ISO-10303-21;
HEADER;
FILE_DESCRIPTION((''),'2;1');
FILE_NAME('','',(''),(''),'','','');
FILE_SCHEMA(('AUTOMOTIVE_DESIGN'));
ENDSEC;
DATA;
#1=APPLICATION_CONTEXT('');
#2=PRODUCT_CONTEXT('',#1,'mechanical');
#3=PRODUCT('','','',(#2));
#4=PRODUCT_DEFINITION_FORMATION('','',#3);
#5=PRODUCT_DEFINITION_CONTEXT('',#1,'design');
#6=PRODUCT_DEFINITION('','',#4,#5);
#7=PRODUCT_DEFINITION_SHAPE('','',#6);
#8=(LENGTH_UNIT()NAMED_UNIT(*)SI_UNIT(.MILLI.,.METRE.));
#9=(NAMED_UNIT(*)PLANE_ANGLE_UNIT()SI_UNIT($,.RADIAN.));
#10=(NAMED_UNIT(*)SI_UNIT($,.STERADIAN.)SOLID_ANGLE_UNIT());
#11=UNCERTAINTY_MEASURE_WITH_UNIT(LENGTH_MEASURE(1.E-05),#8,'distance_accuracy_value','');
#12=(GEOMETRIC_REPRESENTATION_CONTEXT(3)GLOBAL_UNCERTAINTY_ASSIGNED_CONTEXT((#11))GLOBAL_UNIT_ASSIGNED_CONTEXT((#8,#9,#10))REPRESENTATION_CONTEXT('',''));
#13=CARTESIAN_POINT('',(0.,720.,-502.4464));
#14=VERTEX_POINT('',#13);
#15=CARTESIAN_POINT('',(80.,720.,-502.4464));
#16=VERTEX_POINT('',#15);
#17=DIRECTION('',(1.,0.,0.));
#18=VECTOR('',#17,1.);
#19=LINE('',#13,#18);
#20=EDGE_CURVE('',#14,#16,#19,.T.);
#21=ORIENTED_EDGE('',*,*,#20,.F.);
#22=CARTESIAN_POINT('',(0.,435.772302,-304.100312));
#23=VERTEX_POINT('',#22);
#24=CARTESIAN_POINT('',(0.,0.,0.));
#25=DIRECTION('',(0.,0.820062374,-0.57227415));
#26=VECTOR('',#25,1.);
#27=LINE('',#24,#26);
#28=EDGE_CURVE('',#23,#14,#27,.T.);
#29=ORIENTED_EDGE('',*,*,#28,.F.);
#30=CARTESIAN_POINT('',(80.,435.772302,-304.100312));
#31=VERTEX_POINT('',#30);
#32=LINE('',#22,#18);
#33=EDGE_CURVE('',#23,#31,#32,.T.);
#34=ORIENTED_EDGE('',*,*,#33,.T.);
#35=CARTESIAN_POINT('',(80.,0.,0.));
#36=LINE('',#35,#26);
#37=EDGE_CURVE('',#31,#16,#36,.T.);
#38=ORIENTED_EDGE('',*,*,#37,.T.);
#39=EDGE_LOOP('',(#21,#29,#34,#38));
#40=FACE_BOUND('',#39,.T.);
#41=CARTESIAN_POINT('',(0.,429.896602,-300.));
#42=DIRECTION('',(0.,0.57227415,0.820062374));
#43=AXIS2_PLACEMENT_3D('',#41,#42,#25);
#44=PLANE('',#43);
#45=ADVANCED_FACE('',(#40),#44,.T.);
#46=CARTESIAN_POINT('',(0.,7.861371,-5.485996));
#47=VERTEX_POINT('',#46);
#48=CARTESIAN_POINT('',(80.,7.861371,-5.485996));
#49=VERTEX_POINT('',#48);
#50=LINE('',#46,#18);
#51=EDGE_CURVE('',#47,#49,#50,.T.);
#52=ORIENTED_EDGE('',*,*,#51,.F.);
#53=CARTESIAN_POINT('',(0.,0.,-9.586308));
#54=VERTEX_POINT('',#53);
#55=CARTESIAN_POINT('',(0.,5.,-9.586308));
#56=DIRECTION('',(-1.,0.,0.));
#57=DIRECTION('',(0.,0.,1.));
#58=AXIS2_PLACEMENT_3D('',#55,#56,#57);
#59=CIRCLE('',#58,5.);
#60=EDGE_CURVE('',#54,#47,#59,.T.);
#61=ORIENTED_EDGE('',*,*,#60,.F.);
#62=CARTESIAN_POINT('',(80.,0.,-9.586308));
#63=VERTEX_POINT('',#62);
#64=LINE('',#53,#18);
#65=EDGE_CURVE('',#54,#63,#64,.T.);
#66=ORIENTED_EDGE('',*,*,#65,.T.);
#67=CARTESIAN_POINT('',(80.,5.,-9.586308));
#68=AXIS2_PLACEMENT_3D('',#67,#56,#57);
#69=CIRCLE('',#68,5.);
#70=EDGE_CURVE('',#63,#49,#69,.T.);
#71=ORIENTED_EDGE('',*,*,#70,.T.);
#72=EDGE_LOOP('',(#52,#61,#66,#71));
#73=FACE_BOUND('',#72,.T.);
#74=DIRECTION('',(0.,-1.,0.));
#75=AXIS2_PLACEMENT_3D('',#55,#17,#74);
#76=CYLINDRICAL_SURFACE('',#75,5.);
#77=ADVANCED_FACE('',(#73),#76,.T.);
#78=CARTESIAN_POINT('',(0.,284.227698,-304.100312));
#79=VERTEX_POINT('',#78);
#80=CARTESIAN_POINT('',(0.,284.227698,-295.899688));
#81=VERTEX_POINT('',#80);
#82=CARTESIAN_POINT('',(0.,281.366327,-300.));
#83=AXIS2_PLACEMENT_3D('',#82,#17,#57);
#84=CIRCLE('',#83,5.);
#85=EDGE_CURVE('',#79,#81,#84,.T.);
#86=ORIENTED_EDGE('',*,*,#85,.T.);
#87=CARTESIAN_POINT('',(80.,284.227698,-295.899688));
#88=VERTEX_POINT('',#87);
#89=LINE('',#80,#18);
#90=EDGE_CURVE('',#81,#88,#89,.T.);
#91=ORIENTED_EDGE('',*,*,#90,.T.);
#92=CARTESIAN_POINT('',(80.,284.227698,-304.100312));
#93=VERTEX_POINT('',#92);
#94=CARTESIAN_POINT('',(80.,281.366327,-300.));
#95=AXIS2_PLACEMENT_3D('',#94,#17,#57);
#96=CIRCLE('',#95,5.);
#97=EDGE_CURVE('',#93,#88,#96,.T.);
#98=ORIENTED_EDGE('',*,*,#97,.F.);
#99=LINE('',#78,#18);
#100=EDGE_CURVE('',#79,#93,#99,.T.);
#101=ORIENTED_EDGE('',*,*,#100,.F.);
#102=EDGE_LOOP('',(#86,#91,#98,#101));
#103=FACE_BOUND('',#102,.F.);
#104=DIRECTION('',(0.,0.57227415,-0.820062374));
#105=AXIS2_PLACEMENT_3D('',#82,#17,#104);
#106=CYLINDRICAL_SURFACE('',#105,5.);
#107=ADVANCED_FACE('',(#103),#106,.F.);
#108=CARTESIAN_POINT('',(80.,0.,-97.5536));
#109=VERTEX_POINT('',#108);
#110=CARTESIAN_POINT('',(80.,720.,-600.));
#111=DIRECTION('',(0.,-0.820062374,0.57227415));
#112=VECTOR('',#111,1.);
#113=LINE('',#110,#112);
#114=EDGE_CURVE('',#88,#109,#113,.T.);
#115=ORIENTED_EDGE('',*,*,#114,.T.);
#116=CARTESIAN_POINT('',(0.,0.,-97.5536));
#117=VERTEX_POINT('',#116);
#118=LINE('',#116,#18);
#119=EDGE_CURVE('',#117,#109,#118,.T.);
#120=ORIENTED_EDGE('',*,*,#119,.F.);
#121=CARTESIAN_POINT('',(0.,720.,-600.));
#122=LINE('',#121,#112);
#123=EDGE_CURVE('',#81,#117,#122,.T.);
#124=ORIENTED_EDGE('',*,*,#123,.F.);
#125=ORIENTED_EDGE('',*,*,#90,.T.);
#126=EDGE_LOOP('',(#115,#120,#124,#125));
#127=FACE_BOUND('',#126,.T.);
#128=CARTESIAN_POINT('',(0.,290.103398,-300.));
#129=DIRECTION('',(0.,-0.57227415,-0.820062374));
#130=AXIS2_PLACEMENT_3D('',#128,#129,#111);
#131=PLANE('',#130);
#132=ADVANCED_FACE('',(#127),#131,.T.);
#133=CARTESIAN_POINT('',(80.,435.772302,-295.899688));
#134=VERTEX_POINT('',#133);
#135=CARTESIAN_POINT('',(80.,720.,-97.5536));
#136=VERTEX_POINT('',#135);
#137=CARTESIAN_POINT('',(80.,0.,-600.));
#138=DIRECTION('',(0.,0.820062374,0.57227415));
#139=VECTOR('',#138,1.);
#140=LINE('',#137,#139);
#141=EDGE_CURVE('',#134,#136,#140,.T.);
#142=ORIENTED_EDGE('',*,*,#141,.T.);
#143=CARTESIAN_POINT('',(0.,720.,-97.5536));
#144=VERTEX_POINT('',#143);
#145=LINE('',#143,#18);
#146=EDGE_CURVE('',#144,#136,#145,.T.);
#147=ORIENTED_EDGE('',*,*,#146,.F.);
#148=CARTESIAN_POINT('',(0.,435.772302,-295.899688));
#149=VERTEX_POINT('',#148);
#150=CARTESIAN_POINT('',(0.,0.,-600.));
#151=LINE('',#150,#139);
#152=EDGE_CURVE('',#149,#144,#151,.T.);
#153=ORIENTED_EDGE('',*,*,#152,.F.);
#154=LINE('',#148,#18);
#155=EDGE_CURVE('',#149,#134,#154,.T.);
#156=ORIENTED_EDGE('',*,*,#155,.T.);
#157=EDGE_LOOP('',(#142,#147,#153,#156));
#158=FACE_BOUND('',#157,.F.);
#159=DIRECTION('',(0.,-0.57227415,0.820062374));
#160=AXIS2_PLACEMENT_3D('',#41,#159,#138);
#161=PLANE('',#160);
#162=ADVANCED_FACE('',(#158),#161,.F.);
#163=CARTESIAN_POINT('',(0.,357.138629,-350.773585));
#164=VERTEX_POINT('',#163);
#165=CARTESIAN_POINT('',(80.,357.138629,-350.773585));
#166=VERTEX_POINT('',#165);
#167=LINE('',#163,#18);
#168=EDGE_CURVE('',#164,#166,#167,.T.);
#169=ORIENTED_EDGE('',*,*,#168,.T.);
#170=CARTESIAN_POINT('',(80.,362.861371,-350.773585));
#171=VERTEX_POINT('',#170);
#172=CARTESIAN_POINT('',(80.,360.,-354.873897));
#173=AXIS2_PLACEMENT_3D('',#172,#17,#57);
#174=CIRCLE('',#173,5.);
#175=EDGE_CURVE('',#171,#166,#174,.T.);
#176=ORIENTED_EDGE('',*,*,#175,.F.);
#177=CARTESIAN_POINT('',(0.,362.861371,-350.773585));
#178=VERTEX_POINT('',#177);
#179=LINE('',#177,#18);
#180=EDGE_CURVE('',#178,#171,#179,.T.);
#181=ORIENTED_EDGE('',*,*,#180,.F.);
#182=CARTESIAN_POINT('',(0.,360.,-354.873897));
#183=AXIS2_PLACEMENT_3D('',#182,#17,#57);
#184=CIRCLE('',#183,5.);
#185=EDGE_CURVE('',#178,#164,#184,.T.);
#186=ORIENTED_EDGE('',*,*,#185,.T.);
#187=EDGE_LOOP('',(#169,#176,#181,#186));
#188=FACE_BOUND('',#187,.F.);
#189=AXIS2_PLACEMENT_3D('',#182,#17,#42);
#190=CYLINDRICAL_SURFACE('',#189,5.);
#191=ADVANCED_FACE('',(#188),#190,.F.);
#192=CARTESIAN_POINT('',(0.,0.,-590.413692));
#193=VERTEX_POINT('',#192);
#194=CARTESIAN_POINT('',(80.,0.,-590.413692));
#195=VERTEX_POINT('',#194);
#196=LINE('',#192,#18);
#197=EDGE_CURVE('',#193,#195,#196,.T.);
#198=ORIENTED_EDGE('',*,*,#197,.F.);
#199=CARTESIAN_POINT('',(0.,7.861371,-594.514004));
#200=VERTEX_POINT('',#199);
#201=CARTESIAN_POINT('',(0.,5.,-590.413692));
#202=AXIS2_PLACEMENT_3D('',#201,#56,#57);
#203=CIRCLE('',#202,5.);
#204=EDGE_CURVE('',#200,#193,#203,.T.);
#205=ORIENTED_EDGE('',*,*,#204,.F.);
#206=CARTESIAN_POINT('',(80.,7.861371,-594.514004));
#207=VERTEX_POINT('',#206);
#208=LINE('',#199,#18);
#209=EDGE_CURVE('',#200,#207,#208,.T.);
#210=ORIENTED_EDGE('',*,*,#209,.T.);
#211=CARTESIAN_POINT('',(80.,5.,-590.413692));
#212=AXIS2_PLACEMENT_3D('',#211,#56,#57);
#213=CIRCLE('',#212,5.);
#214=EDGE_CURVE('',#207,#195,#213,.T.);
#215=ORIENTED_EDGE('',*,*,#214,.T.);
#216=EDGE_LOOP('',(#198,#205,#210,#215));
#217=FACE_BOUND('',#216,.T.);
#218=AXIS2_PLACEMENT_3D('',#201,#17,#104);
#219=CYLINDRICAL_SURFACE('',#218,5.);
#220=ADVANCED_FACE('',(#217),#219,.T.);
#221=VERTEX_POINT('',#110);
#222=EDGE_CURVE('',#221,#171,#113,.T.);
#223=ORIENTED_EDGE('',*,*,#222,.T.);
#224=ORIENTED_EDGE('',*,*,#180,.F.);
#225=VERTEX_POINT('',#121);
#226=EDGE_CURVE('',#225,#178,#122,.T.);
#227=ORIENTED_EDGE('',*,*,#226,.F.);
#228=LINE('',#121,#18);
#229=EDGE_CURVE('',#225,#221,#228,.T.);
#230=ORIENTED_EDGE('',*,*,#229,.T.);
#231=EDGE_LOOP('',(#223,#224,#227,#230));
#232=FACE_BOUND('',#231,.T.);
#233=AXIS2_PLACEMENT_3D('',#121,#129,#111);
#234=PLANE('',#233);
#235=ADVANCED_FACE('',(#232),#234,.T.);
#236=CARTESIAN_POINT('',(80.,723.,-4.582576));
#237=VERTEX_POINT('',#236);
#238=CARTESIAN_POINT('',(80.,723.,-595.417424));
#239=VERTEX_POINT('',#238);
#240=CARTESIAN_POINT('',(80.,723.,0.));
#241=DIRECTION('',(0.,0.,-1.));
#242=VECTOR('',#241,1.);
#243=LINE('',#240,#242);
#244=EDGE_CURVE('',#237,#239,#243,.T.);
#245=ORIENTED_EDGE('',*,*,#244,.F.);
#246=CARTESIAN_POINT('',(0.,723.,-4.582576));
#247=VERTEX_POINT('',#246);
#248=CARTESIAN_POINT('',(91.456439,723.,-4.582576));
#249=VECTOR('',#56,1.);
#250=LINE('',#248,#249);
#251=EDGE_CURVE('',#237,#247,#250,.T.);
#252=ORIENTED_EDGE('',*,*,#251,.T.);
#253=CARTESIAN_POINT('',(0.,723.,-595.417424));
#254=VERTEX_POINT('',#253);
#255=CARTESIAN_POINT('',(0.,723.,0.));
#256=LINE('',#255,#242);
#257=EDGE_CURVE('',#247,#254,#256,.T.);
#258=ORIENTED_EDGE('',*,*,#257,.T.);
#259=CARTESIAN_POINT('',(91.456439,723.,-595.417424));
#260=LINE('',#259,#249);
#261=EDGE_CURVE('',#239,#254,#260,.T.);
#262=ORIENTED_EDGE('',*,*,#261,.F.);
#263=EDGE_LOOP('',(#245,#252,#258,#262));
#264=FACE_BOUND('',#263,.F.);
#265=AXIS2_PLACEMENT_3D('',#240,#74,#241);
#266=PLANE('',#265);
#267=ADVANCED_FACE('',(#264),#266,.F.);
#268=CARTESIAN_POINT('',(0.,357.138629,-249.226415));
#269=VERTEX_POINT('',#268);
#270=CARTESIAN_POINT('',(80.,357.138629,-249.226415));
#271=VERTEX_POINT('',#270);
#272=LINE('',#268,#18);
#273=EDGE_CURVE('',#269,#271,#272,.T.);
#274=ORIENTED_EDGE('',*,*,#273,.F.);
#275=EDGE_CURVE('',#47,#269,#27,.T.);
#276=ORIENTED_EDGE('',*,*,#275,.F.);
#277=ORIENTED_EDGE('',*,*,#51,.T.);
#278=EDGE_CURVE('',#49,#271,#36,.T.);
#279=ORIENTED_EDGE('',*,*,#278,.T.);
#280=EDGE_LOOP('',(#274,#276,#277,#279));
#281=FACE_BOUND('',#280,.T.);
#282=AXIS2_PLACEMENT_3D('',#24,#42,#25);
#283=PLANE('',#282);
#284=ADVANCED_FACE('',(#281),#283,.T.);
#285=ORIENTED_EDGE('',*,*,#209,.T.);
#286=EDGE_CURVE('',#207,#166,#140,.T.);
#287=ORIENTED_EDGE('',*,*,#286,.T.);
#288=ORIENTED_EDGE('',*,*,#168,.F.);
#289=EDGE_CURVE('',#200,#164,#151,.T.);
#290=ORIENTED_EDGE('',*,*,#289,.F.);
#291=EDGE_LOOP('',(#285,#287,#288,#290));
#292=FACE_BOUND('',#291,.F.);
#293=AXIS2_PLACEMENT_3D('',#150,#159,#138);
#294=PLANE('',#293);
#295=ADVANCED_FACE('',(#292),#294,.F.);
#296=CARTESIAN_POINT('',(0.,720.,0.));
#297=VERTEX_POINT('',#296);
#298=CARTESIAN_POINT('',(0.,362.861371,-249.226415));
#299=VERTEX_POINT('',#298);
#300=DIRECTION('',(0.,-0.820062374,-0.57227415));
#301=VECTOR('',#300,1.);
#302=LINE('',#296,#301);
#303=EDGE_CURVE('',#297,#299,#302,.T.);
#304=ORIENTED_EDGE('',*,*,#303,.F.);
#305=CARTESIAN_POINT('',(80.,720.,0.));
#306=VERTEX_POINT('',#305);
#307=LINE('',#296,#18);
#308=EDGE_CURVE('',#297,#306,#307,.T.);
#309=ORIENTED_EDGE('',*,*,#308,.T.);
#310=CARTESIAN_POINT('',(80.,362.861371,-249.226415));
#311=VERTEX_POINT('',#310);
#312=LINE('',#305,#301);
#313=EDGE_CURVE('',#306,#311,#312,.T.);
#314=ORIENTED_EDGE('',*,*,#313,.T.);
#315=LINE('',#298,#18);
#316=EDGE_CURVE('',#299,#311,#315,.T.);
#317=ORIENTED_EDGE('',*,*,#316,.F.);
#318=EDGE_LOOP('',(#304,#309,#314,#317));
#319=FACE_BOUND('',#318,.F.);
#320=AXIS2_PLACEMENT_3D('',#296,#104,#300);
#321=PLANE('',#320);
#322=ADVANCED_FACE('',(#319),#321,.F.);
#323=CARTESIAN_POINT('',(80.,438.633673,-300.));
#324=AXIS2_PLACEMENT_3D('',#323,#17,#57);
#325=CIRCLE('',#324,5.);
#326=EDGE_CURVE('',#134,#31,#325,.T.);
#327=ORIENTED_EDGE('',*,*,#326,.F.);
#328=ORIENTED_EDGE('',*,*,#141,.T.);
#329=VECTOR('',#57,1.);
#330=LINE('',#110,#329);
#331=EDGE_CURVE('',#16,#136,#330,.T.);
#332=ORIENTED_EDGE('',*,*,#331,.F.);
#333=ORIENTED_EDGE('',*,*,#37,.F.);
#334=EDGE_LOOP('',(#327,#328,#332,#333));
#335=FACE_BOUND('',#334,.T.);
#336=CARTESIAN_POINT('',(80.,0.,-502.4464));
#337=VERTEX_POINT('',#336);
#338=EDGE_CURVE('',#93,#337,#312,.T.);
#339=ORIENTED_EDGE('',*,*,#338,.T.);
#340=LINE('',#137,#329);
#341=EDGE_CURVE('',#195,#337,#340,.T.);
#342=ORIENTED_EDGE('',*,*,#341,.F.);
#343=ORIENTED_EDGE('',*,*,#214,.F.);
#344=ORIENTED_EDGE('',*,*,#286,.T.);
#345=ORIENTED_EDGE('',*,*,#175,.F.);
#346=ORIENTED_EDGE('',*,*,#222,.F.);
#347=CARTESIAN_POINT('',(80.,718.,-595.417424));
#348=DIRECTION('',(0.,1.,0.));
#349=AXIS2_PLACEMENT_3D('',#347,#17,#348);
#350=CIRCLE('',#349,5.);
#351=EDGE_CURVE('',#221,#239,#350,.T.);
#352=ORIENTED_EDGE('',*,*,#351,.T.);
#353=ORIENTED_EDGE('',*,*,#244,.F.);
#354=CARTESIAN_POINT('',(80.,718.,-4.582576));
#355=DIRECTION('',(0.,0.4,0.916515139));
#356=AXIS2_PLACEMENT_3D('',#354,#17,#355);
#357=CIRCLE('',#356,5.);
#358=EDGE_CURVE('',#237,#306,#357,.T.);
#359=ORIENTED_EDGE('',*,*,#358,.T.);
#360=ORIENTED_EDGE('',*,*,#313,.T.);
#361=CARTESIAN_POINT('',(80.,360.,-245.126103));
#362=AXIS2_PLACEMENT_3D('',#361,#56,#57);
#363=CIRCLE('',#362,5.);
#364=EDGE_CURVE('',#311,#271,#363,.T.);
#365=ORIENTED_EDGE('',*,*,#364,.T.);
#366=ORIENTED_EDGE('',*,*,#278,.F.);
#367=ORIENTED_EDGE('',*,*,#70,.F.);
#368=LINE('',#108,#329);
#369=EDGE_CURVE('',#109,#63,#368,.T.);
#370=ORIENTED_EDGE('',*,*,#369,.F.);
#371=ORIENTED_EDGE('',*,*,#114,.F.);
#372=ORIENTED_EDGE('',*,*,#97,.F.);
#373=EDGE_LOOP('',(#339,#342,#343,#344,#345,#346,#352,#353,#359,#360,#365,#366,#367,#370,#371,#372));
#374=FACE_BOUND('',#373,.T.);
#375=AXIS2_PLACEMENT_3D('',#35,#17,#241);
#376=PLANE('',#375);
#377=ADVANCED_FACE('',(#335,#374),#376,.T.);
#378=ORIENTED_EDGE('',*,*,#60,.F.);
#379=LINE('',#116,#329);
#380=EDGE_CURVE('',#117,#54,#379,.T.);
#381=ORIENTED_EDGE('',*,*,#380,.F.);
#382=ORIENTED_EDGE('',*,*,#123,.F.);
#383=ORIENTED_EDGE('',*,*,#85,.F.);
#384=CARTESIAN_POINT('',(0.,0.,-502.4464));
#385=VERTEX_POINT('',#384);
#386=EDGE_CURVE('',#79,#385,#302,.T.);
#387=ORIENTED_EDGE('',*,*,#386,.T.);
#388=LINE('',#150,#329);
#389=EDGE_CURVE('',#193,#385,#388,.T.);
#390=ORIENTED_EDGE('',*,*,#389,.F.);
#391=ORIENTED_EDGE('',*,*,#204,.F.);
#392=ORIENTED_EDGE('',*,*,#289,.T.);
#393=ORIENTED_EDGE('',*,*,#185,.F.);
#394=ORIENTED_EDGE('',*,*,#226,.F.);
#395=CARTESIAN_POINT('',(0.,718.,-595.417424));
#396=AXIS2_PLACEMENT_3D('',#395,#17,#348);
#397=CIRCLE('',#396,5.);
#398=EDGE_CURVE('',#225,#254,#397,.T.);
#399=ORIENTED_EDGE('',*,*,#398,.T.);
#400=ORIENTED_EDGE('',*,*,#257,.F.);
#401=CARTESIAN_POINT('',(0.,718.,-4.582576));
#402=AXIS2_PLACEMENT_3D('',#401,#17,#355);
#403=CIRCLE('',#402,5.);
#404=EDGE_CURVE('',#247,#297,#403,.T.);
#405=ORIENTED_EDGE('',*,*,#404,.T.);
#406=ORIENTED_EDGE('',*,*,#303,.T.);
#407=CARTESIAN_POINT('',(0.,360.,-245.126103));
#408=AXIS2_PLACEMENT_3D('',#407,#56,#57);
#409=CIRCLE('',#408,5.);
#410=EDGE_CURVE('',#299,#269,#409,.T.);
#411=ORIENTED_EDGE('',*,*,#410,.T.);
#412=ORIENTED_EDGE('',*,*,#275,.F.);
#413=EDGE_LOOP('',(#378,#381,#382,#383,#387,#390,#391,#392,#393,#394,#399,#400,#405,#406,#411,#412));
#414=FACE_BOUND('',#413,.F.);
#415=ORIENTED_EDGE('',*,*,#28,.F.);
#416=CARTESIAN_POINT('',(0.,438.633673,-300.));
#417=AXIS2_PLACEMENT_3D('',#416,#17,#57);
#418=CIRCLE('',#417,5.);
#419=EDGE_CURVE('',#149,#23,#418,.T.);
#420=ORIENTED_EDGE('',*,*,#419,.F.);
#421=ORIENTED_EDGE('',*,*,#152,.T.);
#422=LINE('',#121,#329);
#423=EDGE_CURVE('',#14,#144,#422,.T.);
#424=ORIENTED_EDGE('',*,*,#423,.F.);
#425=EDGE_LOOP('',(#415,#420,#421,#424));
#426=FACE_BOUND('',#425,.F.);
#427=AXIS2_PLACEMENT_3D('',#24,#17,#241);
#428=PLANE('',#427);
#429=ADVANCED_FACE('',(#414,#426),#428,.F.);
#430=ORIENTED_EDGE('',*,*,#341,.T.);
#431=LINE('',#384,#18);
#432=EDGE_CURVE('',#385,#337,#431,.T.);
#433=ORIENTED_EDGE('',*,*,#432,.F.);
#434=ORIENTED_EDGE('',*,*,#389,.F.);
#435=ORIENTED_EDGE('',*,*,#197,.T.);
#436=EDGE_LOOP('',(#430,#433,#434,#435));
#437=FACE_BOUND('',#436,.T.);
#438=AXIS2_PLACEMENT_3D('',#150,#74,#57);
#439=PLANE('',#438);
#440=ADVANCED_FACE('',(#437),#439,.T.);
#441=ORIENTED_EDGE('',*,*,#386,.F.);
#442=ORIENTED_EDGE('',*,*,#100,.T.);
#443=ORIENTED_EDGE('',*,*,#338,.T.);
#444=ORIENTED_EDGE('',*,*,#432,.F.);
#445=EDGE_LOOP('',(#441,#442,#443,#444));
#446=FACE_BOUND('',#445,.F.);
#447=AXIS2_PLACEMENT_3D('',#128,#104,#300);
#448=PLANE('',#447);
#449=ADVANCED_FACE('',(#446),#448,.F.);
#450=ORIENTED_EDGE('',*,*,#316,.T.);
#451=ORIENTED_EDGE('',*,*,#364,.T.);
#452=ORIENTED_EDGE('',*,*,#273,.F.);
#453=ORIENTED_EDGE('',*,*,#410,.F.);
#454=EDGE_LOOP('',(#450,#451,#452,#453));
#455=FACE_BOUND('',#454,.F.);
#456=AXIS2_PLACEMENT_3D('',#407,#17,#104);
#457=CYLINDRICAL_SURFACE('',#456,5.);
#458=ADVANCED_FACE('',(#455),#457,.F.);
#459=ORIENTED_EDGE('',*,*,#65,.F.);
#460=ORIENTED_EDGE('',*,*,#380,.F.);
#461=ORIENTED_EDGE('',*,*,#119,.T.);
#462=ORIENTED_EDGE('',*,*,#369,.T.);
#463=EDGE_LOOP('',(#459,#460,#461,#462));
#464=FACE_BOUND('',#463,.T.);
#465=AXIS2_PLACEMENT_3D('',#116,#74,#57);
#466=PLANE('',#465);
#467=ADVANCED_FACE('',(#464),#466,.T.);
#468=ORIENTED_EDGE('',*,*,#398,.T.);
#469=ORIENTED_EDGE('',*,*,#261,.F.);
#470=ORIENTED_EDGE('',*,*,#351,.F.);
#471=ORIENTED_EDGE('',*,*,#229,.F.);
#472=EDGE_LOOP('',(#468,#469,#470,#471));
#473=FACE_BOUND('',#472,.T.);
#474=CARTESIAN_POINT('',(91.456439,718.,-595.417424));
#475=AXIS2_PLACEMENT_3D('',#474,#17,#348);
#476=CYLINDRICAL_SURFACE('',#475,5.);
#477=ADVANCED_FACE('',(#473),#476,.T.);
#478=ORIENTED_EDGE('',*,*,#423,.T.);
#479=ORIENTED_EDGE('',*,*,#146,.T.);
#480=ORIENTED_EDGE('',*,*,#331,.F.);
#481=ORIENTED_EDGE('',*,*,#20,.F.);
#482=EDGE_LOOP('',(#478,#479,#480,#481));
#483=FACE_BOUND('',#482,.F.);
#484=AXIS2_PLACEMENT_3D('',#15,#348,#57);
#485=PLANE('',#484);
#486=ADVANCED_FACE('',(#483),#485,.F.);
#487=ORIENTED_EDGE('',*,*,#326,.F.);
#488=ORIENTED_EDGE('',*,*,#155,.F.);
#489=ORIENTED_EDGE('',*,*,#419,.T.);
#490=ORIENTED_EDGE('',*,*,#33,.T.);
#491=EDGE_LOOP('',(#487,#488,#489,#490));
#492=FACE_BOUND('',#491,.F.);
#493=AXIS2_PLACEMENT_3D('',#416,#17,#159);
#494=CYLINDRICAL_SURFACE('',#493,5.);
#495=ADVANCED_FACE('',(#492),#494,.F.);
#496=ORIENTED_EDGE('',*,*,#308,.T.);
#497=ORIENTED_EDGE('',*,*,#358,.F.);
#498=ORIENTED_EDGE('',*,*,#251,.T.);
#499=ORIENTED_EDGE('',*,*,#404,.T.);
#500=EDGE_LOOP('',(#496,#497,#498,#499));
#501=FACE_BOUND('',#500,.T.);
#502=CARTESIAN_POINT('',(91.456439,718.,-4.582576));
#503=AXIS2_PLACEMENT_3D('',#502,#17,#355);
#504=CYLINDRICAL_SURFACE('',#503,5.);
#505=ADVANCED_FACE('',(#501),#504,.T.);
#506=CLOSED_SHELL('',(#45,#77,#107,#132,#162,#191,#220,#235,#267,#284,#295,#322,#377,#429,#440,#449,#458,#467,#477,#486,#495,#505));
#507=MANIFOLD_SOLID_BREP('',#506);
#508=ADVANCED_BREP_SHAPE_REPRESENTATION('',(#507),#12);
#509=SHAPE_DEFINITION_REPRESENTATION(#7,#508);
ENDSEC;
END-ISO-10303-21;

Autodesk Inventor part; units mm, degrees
ref_plane "YZ Plane" through (0, 0, 0) normal (1, 0, 0) x (0, 1, 0)
ref_plane "XZ Plane" through (0, 0, 0) normal (0, 1, 0) x (-1, 0, 0)
ref_plane "XY Plane" through (0, 0, 0) normal (0, 0, 1) x (1, 0, 0)
sketch "Sketch1" plane through (0, 0, 0) normal (1, 0, 0) x (0, 1, 0)
  line L0 (720, 0) -> (0, -502.4464)
  line L1 (0, -600) -> (720, -97.5536)
  line L2 (0, 0) -> (720, -502.4464)
  line L3 (720, -600) -> (0, -97.5536)
  line L4 (720, 0) -> (720, -97.5536)
  line L5 (720, -502.4464) -> (720, -600)
  line L6 (0, -600) -> (0, -502.4464)
  line L7 (0, -97.5536) -> (0, 0)
  dimension "d0" = 600
  dimension "d1" = 720
  dimension "d2" = 80
  dimension "d3" = 80
sketch "Sketch2" plane through (0, 0, 0) normal (1, 0, 0) x (0, 1, 0)
  point P0 (0, 0)
extrude "Extrusion1" add sketch "Sketch1" along normal blind 80
fillet "Fillet1" radius 5 1 edges at (40, 360, -251.2232)
fillet "Fillet2" radius 5 1 edges at (40, 429.8966, -300)
fillet "Fillet3" radius 5 1 edges at (40, 360, -348.7768)
fillet "Fillet4" radius 5 1 edges at (40, 290.1034, -300)
sketch "Sketch3" plane through (80, 0, 0) normal (1, 0, 0) x (0, 0, -1)
  line L0 (502.4464, 720) -> (600, 720) projected
  line L1 (0, 723) -> (600, 723)
  line L2 (600, 723) -> (600, 720)
  line L3 (600, 720) -> (0, 720)
  line L4 (0, 720) -> (0, 723)
  point P0 (0, 0)
  dimension "d10" = 600
  dimension "d11" = 3
extrude "Extrusion2" add sketch "Sketch3" against normal blind 80
fillet "Fillet5" radius 5 1 edges at (40, 0, 0)
fillet "Fillet6" radius 5 1 edges at (40, 723, 0)
fillet "Fillet7" radius 5 1 edges at (40, 723, -600)
fillet "Fillet8" radius 5 1 edges at (40, 0, -600)
properties part number "leg" material "Steel"
